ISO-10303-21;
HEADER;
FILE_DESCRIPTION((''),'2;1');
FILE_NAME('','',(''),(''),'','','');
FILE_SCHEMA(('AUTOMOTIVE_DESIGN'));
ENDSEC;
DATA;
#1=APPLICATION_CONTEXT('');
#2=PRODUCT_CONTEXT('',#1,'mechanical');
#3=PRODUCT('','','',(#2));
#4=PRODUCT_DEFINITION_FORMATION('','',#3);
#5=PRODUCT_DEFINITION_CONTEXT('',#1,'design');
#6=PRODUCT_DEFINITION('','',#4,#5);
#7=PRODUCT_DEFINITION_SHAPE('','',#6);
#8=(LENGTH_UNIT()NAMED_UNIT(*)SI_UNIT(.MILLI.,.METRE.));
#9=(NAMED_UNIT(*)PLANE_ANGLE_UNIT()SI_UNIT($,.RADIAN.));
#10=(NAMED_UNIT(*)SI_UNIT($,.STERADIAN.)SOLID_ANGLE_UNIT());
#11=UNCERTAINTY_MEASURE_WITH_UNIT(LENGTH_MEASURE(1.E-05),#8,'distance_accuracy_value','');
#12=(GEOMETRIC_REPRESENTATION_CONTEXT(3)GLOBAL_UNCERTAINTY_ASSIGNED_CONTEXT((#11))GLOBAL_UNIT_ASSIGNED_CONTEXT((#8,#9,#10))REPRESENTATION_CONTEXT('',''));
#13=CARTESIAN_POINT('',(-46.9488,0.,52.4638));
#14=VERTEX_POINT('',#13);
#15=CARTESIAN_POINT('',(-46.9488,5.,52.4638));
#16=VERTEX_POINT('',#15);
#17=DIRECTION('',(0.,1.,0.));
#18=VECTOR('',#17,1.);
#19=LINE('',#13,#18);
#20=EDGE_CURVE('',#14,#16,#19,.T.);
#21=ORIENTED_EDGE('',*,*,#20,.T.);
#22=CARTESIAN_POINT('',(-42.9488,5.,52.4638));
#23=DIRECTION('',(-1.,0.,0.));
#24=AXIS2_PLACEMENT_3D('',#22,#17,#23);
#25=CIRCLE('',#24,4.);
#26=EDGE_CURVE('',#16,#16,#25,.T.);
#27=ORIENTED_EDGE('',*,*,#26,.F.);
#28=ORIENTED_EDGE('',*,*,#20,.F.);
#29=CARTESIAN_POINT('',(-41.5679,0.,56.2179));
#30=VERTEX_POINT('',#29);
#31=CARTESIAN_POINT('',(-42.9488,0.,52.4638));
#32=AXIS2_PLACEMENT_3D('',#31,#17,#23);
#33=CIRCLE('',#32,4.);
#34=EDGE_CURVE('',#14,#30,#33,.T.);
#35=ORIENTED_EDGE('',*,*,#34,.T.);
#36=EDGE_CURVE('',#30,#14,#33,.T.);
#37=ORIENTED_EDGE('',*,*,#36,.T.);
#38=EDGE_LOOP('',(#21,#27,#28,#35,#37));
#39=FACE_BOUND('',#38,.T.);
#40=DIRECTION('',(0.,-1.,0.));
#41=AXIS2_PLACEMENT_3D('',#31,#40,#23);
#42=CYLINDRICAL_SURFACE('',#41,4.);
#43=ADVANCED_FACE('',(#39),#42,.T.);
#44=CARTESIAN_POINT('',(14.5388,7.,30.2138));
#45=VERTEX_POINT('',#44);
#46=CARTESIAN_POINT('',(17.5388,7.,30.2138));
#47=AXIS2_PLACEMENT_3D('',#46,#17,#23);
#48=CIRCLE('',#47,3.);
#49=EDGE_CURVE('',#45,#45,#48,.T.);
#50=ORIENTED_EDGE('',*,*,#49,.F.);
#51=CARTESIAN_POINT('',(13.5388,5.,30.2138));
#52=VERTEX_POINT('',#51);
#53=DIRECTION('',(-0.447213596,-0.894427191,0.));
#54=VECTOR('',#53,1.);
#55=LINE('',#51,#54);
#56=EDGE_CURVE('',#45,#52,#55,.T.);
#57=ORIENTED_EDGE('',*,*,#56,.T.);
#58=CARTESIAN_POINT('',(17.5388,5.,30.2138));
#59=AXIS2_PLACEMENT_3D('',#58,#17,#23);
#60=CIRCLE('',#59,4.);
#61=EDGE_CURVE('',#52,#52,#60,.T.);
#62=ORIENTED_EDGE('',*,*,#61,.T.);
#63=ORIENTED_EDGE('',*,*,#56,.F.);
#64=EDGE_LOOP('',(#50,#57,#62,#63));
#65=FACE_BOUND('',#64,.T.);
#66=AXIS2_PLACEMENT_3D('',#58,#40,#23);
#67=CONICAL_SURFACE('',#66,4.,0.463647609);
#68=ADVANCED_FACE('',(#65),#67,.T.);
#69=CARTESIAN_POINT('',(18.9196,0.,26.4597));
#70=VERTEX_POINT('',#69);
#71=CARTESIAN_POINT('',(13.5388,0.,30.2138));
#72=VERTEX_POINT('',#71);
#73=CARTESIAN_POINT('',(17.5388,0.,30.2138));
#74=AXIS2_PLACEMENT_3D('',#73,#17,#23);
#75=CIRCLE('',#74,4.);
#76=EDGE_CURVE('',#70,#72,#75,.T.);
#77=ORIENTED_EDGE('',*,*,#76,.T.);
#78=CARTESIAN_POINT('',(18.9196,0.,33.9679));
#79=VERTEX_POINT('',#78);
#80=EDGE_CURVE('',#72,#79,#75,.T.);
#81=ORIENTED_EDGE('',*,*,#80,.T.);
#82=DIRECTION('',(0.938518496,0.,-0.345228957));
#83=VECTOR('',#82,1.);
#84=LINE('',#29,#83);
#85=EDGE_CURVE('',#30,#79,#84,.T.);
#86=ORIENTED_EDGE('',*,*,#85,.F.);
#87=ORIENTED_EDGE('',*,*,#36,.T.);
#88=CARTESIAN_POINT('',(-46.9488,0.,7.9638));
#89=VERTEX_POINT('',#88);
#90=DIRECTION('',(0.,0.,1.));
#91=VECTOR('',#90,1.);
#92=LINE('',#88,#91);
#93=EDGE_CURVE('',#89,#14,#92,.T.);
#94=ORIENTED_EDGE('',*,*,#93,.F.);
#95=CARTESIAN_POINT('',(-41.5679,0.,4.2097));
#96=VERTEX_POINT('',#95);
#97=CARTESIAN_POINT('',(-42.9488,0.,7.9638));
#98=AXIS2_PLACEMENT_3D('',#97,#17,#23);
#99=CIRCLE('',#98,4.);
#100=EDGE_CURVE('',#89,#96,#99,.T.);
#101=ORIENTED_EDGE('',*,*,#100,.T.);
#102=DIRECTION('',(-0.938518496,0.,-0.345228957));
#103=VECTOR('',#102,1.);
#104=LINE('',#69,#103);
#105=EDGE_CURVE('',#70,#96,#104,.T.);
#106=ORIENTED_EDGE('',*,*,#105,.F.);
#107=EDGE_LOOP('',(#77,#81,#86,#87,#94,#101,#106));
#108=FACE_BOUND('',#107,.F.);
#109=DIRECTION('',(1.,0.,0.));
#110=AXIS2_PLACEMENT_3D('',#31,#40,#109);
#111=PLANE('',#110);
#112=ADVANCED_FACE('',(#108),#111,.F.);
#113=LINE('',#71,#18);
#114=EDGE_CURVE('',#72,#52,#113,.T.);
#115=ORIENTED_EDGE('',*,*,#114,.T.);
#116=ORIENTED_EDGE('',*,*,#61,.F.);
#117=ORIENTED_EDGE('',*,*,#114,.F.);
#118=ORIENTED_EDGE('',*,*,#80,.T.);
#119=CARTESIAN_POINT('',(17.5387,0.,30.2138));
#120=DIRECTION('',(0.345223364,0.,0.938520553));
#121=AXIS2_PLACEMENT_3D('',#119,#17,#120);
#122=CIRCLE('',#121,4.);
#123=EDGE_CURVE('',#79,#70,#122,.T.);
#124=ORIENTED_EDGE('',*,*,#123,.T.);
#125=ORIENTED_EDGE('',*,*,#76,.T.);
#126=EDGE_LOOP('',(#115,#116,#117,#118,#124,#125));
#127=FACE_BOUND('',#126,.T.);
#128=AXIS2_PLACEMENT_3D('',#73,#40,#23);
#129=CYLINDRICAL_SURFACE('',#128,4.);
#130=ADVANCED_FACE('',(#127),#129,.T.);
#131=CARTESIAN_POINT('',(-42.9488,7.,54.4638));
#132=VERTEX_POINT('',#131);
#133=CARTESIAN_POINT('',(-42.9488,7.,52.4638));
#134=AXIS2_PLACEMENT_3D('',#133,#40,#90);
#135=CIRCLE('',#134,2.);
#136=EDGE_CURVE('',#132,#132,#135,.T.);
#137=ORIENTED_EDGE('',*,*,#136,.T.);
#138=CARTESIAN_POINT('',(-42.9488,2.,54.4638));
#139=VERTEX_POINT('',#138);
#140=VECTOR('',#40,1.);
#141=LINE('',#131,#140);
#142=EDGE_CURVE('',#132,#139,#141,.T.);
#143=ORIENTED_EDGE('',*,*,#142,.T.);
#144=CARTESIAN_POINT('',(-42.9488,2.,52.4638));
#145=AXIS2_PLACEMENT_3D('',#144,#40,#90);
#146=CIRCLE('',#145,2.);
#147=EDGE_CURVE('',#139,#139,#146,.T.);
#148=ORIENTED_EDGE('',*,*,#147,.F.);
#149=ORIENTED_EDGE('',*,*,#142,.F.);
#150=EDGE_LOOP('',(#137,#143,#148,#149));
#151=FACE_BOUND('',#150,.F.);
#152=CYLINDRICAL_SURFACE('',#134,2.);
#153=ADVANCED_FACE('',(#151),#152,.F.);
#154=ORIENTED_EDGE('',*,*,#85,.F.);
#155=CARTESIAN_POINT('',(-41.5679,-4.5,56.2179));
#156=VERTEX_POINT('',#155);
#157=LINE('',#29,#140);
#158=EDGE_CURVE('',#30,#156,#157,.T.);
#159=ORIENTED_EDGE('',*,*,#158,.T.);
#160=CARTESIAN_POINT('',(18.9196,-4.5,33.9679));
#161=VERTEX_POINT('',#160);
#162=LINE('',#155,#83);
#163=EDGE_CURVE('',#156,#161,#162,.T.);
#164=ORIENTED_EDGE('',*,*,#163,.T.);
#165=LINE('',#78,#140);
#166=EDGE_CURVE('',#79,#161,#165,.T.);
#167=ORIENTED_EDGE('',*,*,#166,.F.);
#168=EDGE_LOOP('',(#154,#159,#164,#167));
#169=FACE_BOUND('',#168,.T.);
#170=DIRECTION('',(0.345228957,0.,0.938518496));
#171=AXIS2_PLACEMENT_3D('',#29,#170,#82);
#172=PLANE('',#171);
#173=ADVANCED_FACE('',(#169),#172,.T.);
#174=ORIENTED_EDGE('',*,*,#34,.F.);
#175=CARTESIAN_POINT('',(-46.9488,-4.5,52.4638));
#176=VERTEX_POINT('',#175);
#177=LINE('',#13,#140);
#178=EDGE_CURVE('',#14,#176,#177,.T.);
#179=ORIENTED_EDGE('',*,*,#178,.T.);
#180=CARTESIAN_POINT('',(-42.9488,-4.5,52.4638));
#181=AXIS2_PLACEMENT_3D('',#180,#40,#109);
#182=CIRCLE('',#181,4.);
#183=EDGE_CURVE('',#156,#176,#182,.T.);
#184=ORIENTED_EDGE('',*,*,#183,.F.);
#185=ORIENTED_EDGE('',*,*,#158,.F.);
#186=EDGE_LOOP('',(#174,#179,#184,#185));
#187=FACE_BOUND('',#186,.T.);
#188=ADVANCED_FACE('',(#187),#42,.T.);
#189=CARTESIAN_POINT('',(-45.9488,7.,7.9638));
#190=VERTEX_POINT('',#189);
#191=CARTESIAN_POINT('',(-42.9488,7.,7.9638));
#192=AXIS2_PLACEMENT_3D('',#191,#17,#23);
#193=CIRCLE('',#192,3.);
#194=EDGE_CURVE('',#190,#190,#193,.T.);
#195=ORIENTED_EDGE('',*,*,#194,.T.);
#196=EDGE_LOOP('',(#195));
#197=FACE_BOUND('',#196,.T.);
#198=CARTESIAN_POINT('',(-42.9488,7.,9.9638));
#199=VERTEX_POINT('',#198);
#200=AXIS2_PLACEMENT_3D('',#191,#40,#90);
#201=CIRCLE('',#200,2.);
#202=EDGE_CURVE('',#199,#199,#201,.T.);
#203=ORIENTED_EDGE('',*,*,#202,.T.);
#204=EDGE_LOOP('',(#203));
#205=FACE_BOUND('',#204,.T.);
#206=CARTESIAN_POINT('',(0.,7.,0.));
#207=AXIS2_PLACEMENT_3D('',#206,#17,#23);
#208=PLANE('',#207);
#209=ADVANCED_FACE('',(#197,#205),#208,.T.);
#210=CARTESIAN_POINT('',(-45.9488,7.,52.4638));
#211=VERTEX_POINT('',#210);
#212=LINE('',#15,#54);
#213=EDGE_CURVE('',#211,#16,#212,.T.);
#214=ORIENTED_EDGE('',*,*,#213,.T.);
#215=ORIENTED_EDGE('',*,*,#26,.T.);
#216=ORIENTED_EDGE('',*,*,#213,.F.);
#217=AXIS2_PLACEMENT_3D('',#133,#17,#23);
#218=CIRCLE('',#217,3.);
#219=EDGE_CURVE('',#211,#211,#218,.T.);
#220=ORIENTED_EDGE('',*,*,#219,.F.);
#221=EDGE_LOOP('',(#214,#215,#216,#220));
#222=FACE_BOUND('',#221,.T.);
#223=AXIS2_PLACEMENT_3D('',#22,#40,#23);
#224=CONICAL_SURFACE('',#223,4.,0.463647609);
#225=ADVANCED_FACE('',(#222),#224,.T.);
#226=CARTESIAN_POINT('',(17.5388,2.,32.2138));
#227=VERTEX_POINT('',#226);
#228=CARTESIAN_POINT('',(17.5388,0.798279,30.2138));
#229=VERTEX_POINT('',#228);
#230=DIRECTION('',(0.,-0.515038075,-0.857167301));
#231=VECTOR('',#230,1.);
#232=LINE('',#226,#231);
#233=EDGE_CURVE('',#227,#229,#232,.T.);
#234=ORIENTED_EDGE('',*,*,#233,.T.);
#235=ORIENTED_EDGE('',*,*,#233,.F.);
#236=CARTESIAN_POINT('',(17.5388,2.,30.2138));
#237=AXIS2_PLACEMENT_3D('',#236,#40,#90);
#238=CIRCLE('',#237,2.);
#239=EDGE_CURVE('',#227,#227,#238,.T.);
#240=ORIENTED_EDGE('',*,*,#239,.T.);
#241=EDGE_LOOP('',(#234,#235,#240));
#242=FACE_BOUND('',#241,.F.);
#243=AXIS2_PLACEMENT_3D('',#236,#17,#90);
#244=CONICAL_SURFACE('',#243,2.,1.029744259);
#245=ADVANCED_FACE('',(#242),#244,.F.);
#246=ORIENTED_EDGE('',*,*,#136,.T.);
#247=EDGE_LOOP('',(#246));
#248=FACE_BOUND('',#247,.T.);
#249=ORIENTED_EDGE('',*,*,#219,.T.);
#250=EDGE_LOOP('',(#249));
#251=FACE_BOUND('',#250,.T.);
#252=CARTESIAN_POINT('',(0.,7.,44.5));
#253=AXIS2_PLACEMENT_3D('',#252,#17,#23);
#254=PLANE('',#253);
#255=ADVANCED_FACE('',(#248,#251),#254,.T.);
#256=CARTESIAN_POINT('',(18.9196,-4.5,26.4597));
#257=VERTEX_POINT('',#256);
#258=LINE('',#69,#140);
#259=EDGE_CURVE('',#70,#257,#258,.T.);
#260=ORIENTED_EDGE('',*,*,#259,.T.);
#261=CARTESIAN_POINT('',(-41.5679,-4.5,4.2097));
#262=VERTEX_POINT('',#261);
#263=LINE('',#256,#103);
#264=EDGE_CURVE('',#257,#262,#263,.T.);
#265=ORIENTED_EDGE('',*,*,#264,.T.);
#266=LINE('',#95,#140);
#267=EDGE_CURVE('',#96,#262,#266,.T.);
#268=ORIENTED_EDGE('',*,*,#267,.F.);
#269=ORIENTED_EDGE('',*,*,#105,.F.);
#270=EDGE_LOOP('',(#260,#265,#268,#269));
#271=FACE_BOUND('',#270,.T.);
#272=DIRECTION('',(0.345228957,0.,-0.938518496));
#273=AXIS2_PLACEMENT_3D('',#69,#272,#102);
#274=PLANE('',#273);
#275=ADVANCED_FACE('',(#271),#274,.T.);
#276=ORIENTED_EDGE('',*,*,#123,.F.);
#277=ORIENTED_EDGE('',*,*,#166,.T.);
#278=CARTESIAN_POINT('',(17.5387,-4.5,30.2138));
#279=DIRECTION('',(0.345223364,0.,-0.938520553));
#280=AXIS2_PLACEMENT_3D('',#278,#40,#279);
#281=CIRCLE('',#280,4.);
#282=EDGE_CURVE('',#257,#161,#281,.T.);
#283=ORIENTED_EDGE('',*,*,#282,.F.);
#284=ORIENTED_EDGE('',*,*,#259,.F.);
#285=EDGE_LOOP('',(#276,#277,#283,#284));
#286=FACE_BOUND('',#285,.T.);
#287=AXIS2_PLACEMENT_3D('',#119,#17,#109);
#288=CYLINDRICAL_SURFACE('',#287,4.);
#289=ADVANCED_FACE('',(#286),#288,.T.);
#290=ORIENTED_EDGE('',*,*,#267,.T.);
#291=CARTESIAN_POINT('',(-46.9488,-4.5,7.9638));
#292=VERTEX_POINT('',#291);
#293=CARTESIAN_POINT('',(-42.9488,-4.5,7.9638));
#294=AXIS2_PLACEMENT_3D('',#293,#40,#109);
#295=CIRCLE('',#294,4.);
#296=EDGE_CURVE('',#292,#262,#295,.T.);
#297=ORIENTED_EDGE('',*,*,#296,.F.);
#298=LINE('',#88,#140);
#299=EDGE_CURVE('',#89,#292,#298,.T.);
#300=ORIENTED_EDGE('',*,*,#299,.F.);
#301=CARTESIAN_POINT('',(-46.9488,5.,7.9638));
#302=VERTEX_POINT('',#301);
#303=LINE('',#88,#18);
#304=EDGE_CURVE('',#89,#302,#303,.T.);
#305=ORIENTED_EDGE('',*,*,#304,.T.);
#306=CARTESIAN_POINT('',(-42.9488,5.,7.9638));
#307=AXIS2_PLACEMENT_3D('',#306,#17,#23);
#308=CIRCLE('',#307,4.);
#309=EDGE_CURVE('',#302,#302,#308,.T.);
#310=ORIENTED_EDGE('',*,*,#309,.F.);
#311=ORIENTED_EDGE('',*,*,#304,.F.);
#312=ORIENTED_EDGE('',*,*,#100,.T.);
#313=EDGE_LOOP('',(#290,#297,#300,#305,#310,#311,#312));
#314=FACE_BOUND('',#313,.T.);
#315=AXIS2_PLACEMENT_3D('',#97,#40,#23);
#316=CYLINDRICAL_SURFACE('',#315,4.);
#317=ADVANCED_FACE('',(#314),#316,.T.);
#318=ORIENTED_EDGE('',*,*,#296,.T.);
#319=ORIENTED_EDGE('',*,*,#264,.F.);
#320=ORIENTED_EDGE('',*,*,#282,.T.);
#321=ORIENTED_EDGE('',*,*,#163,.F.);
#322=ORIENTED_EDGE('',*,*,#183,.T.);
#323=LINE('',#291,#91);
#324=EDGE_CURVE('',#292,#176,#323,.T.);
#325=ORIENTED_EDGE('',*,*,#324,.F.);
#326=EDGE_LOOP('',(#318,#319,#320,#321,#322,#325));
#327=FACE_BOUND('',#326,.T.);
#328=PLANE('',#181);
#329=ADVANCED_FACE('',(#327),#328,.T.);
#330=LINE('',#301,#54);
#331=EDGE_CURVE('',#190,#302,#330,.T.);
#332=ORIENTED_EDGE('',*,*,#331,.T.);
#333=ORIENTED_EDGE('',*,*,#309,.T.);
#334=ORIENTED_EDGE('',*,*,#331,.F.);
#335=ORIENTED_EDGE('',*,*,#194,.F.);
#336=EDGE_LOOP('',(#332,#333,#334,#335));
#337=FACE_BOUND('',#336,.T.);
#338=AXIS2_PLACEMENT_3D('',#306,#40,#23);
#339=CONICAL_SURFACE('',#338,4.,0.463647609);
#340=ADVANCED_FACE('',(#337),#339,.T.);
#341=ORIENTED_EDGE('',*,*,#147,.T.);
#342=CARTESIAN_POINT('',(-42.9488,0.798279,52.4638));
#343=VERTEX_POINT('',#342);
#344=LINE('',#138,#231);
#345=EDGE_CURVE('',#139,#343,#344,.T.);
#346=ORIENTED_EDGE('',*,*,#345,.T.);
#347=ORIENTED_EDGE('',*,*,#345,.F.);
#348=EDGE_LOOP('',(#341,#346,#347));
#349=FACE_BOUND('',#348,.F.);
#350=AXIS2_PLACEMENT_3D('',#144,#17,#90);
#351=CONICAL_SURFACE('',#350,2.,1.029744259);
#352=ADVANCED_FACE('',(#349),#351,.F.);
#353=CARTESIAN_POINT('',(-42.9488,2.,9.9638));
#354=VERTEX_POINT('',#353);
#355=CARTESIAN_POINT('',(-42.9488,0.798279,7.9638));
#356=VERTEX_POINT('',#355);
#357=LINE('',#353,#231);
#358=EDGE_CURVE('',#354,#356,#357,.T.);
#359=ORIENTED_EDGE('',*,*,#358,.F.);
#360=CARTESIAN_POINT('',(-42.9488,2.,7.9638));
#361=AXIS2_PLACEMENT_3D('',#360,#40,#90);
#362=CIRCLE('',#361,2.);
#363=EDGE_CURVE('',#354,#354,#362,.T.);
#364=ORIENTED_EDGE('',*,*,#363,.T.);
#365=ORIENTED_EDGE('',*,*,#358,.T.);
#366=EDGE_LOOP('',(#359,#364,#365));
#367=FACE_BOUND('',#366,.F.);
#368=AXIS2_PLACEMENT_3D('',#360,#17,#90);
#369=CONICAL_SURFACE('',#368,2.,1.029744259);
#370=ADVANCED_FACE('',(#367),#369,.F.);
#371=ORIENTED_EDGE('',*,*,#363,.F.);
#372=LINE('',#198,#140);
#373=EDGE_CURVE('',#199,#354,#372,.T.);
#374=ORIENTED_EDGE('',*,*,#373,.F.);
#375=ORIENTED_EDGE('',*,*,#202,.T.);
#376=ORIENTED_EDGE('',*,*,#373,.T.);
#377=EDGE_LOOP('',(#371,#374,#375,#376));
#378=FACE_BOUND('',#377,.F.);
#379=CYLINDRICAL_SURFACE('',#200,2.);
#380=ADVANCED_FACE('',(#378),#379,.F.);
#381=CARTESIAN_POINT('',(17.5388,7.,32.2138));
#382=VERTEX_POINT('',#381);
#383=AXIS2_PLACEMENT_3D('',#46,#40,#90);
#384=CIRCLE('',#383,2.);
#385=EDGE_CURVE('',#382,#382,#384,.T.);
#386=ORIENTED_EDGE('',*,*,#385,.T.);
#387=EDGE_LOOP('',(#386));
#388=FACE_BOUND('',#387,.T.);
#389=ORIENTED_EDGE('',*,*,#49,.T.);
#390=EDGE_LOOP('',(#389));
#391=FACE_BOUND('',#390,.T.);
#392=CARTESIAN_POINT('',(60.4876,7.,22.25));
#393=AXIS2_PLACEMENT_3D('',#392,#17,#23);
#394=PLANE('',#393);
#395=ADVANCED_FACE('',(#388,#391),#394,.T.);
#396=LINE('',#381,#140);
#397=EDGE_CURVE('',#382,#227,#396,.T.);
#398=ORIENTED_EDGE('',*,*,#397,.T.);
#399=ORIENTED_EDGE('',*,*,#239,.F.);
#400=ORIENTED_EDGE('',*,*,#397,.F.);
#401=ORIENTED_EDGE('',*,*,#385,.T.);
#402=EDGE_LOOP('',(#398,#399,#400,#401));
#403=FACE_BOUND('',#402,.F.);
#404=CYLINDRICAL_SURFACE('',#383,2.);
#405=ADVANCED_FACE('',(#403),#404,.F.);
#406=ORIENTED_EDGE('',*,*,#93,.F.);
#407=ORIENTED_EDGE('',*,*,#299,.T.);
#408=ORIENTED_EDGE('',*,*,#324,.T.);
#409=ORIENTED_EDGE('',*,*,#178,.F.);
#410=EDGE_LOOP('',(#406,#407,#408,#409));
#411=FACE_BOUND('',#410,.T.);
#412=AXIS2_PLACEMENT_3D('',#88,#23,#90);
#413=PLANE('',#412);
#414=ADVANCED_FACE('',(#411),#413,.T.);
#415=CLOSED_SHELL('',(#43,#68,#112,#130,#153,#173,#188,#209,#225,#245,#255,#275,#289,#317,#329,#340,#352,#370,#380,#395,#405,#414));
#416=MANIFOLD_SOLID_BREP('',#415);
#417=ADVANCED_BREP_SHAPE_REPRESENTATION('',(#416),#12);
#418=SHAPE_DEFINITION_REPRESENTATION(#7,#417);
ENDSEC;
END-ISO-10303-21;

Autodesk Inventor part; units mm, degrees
ref_plane "YZ Plane" through (0, 0, 0) normal (1, 0, 0) x (0, 1, 0)
ref_plane "XZ Plane" through (0, 0, 0) normal (0, 1, 0) x (-1, 0, 0)
ref_plane "XY Plane" through (0, 0, 0) normal (0, 0, 1) x (1, 0, 0)
sketch "Connector Hole Layout" plane through (0, 0, 0) normal (0, 1, 0) x (-1, 0, 0)
  circle A0 centre (42.9488, 7.9638) radius 1.6 construction
  circle A1 centre (-17.5388, 30.2138) radius 1.6 construction
  circle A2 centre (42.9488, 52.4638) radius 1.6 construction
  line L0 (42.9488, 7.9638) -> (42.9488, 52.4638) construction
  line L1 (41.4471, 51.9114) -> (-16.0371, 30.7661) construction
  point P0 (42.9488, 30.2138)
  dimension "d0" = 3.2
  dimension "d22" = 44.5
  dimension "d23" = 61.25
sketch "Sketch8" plane through (0, 0, 0) normal (0, 1, 0) x (-1, 0, 0)
  circle A0 centre (42.9488, 7.9638) radius 1.6 construction
  circle A1 centre (42.9488, 52.4638) radius 1.6 construction
  circle A2 centre (-17.5388, 30.2138) radius 1.6 construction
  circle A3 centre (42.9488, 7.9638) radius 4
  point P0 (0, 0)
  dimension "d51" = 8
extrude "Extrusion5" add sketch "Sketch8" along normal blind 7
sketch "Sketch9" plane through (-42.9488, 7, 7.9638) normal (0, 1, 0) x (1, 0, 0)
  point P0 (42.9488, 7.9638)
  point P1 (0, 0)
hole "Hole2" at (-42.9488, 7, 7.9638) direction (0, -1, 0) diameter 4 depth 5 tip angle 118
chamfer "Chamfer3" distance 1 distance2 2 1 edges at (-38.9488, 7, 7.9638) measured on face at (-46.2385, 7, 7.5643)
pattern_sketch "Sketch Driven Pattern1" from (-42.9488, 0, 7.9638) copies at (-42.9488, 0, 52.4638) at (17.5388, 0, 30.2138)
sketch "Sketch10" plane through (-42.9488, 0, 52.4638) normal (0, -1, 0) x (1, 0, 0)
  circle A0 centre (0, 0) radius 4 projected
  line L0 (1.3809, 3.7541) -> (61.8684, -18.4959)
  circle A1 centre (60.4875, -22.25) radius 4 projected
  line L1 (61.8684, -26.0041) -> (1.3809, -48.2541)
  circle A2 centre (0, -44.5) radius 4 projected
  line L2 (-4, -44.5) -> (-4, 0)
  circle A3 centre (0, 0) radius 4 projected
  circle A4 centre (0, -44.5) radius 4 projected
  point P0 (42.9488, -52.4638)
extrude "Extrusion6" add sketch "Sketch10" along normal blind 4.5
properties part number "db-25_standoffs_plate"
